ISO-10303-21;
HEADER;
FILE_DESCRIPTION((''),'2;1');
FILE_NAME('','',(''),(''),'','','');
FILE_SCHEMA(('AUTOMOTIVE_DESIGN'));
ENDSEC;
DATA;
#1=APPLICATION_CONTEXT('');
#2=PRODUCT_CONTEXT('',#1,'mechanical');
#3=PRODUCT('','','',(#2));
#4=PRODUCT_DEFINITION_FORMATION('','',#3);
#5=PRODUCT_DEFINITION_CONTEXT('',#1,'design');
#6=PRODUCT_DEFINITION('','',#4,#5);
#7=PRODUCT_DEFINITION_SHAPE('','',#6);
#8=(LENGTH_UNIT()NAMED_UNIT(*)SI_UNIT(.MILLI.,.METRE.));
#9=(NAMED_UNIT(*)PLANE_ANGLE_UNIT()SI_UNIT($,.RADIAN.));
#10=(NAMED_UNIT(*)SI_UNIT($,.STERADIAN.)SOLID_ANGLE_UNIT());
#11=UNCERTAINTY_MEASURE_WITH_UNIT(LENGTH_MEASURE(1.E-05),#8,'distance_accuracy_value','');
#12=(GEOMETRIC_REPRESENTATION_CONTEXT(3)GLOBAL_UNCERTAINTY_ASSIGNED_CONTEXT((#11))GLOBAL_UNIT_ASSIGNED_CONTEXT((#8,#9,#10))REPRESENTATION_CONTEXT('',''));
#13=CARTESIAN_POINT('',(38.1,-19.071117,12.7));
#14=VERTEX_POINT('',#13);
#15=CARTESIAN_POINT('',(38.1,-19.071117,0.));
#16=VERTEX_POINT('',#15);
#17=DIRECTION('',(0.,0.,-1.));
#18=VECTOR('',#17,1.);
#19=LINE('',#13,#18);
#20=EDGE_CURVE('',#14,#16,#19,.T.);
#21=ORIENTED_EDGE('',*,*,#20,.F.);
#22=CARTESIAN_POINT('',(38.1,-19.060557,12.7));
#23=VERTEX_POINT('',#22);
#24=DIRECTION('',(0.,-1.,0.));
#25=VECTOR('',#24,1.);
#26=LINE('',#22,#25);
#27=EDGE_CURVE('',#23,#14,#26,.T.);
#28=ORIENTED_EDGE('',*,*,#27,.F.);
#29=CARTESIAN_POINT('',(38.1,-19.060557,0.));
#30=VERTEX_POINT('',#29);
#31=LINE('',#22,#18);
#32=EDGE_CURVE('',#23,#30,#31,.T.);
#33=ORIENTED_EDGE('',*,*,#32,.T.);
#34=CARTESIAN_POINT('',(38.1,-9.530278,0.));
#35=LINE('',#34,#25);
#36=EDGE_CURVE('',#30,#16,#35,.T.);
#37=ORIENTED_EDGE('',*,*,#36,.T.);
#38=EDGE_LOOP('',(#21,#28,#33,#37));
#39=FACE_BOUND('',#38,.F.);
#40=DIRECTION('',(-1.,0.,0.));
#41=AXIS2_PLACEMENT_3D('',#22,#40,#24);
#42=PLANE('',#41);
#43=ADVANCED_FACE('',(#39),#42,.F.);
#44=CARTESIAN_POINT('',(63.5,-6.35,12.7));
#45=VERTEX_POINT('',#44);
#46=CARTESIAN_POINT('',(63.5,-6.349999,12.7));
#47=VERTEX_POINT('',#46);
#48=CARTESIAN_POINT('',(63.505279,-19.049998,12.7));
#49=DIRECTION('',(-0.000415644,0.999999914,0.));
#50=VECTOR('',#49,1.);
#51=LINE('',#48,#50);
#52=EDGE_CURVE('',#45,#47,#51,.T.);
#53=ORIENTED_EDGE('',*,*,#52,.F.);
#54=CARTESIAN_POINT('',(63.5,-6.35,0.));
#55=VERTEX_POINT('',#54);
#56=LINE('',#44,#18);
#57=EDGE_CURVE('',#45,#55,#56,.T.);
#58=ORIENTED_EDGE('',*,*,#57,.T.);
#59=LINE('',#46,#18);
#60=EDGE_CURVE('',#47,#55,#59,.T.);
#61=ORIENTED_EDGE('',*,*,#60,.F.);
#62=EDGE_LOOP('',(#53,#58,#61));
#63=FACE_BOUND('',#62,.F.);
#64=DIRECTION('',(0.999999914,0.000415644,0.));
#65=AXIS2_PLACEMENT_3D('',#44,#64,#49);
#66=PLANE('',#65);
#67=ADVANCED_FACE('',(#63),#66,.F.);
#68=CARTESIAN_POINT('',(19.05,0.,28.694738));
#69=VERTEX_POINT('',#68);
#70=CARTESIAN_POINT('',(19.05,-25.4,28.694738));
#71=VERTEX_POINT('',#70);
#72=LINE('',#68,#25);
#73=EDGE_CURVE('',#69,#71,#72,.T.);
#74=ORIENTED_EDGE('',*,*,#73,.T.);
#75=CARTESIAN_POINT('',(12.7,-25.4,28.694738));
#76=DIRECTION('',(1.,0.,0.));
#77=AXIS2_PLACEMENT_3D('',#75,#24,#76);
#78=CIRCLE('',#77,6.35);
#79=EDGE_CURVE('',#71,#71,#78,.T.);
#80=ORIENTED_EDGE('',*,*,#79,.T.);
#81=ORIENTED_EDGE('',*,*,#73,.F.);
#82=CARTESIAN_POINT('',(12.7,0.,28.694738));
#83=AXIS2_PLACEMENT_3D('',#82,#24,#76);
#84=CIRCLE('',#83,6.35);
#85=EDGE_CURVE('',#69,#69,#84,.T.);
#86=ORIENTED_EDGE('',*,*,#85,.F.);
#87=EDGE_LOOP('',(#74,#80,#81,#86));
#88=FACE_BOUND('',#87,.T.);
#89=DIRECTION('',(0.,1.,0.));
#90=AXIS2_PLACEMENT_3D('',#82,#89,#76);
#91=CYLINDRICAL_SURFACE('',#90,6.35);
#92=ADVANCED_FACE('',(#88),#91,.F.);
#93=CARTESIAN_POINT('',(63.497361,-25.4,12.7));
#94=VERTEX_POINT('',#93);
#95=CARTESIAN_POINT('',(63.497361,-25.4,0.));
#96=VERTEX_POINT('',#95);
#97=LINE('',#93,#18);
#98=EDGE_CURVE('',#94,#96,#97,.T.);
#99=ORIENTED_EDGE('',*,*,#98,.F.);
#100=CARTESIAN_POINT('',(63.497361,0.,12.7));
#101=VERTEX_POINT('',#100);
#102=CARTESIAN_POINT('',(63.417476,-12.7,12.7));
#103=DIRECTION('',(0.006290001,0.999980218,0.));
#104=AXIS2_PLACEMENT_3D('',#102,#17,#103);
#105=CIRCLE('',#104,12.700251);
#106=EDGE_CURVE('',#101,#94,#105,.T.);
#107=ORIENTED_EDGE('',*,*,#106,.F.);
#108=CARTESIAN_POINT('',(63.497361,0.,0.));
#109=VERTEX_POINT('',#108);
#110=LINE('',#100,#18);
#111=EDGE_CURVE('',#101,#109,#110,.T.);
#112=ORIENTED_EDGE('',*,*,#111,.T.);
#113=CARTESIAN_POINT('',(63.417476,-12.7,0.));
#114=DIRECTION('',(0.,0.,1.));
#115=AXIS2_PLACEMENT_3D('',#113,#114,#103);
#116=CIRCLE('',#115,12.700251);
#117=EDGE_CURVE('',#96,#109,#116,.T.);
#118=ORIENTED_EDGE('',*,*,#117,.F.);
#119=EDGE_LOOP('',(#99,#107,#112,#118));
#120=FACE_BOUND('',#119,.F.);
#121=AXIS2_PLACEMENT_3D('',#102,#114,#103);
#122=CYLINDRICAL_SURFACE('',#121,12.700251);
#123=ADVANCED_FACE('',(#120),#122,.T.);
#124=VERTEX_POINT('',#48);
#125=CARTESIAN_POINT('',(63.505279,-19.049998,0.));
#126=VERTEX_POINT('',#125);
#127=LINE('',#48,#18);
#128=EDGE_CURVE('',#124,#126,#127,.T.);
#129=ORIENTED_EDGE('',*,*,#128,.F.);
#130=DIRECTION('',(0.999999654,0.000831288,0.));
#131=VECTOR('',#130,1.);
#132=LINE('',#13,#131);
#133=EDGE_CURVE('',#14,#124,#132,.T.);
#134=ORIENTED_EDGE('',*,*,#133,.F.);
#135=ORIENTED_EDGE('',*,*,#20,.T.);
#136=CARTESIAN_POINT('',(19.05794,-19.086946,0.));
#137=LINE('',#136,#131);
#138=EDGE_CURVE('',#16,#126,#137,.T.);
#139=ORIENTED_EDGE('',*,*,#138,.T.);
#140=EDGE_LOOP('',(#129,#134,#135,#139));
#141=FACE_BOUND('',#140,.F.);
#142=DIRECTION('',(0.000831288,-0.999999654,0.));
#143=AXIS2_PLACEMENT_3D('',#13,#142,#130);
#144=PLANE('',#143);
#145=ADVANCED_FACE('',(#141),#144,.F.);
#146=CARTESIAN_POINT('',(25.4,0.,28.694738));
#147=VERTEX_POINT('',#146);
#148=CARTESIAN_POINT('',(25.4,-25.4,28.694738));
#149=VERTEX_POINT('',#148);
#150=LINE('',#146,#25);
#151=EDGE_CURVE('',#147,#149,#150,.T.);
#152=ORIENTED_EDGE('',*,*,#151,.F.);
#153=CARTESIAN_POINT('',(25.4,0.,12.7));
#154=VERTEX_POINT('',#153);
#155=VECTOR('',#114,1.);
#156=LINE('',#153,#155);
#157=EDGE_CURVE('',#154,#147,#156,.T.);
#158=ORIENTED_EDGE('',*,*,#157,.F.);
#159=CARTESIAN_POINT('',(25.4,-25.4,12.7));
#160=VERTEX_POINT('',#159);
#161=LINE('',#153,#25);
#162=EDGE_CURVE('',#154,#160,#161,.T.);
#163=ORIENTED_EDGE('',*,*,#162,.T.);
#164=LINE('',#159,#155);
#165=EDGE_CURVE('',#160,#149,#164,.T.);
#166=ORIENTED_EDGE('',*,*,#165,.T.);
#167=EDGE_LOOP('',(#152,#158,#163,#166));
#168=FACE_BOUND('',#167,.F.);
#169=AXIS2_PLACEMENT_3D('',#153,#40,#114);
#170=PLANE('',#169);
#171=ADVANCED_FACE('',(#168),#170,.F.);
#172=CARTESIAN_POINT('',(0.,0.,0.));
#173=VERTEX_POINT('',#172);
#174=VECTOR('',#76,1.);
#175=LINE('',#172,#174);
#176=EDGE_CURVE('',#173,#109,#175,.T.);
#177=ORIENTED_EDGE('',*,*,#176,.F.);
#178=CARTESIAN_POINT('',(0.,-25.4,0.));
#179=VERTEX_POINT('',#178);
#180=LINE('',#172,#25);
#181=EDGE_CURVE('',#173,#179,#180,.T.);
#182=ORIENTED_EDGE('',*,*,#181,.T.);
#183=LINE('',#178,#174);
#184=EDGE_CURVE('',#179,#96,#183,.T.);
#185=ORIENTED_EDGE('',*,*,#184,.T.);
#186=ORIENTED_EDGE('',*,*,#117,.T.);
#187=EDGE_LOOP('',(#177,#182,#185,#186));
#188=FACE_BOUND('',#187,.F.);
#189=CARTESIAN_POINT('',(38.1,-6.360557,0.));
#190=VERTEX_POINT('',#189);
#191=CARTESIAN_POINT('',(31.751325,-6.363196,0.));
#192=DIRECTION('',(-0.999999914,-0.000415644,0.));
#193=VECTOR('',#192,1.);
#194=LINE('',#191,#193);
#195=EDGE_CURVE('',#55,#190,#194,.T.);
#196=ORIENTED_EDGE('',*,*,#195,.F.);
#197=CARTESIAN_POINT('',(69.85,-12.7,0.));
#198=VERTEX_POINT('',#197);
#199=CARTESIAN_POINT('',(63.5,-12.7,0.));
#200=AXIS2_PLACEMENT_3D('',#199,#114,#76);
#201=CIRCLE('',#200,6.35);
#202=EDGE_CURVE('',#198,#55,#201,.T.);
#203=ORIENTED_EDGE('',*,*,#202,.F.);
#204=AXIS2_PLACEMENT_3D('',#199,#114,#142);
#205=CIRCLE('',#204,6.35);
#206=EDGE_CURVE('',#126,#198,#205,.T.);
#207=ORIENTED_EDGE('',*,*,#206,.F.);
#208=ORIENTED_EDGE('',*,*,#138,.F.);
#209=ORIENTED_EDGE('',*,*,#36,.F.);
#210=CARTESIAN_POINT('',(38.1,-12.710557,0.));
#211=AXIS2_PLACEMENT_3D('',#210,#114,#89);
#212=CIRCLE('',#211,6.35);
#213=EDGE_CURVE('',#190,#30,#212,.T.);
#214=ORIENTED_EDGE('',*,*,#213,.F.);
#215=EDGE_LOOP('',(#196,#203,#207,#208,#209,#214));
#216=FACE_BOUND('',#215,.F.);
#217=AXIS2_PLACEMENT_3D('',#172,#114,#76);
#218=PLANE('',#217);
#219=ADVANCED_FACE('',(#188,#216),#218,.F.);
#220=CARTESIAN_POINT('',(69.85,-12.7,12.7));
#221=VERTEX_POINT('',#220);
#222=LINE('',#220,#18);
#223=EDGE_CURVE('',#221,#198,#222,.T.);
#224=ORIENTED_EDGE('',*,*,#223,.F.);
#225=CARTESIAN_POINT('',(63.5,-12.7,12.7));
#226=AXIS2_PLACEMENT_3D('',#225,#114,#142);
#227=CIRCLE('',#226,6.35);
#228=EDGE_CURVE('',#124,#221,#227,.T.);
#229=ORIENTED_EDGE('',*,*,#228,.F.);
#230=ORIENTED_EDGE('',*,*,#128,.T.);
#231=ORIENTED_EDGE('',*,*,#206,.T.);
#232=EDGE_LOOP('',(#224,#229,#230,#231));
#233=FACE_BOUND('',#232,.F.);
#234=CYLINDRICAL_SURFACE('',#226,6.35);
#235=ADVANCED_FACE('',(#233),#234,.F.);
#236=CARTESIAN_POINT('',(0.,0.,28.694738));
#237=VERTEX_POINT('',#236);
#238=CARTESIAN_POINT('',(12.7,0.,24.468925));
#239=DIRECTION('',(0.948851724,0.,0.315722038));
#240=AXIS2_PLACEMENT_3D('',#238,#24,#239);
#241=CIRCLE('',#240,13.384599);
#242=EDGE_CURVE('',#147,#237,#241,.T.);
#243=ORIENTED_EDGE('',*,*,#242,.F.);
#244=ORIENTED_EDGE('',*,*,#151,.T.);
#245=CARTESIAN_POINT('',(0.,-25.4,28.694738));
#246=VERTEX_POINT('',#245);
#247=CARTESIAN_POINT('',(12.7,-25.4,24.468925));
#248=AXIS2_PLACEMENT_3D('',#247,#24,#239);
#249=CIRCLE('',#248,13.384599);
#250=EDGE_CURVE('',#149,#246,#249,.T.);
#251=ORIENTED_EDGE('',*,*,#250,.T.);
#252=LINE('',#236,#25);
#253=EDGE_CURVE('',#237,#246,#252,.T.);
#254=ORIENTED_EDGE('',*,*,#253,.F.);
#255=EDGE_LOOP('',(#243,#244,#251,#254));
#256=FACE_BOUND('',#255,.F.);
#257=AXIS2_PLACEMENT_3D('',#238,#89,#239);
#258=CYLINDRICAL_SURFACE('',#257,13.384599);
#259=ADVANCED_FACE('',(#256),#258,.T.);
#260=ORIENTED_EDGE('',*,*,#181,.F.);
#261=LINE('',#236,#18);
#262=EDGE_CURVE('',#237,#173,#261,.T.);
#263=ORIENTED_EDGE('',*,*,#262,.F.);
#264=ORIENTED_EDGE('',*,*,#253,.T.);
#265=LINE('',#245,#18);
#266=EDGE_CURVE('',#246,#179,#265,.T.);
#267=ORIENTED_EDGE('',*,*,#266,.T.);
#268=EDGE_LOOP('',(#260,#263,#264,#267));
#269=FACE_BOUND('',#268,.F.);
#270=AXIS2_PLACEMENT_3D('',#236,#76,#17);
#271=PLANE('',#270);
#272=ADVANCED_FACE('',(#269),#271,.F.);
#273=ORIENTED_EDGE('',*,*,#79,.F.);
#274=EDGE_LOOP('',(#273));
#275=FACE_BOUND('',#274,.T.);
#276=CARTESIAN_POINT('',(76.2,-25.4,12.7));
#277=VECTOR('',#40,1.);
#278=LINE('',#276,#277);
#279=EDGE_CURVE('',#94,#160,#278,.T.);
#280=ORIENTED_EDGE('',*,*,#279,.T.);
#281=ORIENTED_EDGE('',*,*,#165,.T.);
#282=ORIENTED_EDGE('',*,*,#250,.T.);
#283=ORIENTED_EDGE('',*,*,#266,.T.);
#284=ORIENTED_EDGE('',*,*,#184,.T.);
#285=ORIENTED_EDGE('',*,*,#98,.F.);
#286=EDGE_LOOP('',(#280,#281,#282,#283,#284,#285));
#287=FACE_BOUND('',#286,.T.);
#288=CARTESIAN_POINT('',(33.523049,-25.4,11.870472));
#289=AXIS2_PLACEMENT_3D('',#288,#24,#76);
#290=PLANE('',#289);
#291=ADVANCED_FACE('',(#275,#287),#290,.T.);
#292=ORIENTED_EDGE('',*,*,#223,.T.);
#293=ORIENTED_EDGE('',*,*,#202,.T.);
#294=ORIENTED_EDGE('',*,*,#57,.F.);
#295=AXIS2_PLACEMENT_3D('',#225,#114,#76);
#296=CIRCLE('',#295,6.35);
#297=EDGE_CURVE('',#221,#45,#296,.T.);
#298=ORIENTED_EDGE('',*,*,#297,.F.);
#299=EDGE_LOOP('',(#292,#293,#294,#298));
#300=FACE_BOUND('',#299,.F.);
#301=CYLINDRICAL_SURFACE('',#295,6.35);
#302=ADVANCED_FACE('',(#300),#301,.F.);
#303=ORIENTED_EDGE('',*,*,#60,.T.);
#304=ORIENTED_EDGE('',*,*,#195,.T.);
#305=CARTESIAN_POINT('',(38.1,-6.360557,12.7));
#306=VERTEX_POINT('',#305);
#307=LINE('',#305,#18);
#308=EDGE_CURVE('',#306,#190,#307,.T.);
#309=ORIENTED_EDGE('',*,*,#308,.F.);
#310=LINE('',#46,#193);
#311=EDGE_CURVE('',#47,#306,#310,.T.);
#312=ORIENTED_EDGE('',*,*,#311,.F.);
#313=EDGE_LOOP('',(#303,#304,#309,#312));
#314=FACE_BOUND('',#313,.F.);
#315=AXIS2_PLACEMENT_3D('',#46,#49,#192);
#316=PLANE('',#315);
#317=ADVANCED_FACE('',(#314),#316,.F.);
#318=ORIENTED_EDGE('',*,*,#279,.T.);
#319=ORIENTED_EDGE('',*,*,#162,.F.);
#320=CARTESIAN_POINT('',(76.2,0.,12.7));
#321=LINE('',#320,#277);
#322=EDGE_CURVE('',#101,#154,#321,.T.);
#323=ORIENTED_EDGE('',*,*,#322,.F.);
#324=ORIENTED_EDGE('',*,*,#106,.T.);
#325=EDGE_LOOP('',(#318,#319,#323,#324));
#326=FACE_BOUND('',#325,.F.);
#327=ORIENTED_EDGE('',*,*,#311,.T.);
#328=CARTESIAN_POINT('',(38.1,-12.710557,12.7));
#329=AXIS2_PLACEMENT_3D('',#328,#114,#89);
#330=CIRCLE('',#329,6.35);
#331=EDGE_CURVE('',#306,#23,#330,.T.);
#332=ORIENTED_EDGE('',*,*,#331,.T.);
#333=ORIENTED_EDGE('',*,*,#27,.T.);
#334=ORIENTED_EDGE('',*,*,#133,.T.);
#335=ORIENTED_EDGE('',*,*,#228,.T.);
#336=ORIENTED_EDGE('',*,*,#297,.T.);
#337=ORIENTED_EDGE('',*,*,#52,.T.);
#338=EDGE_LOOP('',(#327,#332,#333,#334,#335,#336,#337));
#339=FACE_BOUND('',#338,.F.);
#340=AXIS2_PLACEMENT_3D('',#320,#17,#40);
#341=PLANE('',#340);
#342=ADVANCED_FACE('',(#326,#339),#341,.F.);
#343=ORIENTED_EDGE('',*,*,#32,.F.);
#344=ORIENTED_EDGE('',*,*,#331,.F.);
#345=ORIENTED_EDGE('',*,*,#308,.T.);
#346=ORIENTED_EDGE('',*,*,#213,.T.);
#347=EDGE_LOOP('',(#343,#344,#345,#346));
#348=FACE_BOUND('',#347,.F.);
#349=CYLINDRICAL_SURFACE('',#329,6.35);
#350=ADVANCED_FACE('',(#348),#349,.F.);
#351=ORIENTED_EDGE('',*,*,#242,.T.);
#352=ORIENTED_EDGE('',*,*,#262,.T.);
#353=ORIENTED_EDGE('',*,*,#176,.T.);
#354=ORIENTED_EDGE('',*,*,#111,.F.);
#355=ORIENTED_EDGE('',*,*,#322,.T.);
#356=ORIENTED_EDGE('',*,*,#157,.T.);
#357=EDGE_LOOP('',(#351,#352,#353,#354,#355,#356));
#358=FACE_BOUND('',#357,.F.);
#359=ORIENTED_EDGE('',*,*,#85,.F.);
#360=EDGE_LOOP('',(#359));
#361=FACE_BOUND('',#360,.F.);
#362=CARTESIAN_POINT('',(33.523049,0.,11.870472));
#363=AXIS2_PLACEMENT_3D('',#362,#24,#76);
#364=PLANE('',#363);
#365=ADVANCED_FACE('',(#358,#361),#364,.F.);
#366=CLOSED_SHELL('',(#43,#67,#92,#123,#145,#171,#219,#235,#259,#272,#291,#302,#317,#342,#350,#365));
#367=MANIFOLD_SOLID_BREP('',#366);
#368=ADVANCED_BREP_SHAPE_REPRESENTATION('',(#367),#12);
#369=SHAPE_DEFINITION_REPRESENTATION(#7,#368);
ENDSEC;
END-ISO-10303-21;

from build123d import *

# Parameters (mm, degrees)
F0_R     = 6.35
F1_DEPTH = 25.4
F3_DEPTH = 25.4
F5_DEPTH = 25.4


with BuildPart() as f1:
    # F0 (on Front) → F1 (new body)
    with BuildSketch(Plane.XZ):
        with BuildLine():
            Line((0, 28.6947377026), (0, 0))
            Line((0, 0), (76.2, 0))
            Line((76.2, 0), (76.2, 12.7))
            Line((76.2, 12.7), (25.4, 12.7))
            Line((25.4, 12.7), (25.4, 28.6947377026))
            ThreePointArc((25.4, 28.6947377026), (12.7, 37.8535239462), (0, 28.6947377026))
        make_face()
        with Locations((12.7, 28.6947377026)):
            Circle(F0_R, mode=Mode.SUBTRACT)
    extrude(amount=F1_DEPTH)

    # F2 (on face) → F3 (cut)
    with BuildSketch(Plane.XY.offset(12.7)):
        with BuildLine():
            ThreePointArc((38.1, -6.3605568116), (42.5901280605, -8.220428751), (44.45, -12.7105568116))
            ThreePointArc((44.45, -12.7105568116), (42.5901280605, -17.2006848721), (38.1, -19.0605568116))
            Line((38.1, -19.0605568116), (38.1, -19.0711169188))
            Line((38.1, -19.0711169188), (63.5052786794, -19.0499978059))
            Line((63.5052786794, -19.0499978059), (63.5, -6.3499994515))
            Line((63.5, -6.3499994515), (38.1, -6.3605568116))
        make_face()
        with BuildLine():
            Line((38.1, -19.0605568116), (38.1, -6.3605568116))
            ThreePointArc((38.1, -6.3605568116), (31.75, -12.7105568116), (38.1, -19.0605568116))
        make_face()
        with BuildLine():
            ThreePointArc((38.1, -19.0605568116), (42.5901280605, -17.2006848721), (44.45, -12.7105568116))
            ThreePointArc((44.45, -12.7105568116), (42.5901280605, -8.220428751), (38.1, -6.3605568116))
            Line((38.1, -6.3605568116), (38.1, -19.0605568116))
        make_face()
        with BuildLine():
            ThreePointArc((69.85, -12.7), (67.9901280605, -8.2098719395), (63.5, -6.35))
            ThreePointArc((63.5, -6.35), (57.1500005485, -12.7026393399), (63.5052786794, -19.0499978059))
            ThreePointArc((63.5052786794, -19.0499978059), (67.9919939678, -17.1882613775), (69.85, -12.7))
        make_face()
    extrude(amount=-F3_DEPTH, mode=Mode.SUBTRACT)

    # F4 (on face) → F5 (cut)
    with BuildSketch(Plane.XY.offset(12.7)):
        with BuildLine():
            ThreePointArc((63.4973606602, 0), (76.1177273109, -12.7), (63.4973606602, -25.4))
            Line((63.4973606602, -25.4), (76.2, -25.4))
            Line((76.2, -25.4), (76.2, 0))
            Line((76.2, 0), (63.4973606602, 0))
        make_face()
    extrude(amount=-F5_DEPTH, mode=Mode.SUBTRACT)


solid = f1.part
